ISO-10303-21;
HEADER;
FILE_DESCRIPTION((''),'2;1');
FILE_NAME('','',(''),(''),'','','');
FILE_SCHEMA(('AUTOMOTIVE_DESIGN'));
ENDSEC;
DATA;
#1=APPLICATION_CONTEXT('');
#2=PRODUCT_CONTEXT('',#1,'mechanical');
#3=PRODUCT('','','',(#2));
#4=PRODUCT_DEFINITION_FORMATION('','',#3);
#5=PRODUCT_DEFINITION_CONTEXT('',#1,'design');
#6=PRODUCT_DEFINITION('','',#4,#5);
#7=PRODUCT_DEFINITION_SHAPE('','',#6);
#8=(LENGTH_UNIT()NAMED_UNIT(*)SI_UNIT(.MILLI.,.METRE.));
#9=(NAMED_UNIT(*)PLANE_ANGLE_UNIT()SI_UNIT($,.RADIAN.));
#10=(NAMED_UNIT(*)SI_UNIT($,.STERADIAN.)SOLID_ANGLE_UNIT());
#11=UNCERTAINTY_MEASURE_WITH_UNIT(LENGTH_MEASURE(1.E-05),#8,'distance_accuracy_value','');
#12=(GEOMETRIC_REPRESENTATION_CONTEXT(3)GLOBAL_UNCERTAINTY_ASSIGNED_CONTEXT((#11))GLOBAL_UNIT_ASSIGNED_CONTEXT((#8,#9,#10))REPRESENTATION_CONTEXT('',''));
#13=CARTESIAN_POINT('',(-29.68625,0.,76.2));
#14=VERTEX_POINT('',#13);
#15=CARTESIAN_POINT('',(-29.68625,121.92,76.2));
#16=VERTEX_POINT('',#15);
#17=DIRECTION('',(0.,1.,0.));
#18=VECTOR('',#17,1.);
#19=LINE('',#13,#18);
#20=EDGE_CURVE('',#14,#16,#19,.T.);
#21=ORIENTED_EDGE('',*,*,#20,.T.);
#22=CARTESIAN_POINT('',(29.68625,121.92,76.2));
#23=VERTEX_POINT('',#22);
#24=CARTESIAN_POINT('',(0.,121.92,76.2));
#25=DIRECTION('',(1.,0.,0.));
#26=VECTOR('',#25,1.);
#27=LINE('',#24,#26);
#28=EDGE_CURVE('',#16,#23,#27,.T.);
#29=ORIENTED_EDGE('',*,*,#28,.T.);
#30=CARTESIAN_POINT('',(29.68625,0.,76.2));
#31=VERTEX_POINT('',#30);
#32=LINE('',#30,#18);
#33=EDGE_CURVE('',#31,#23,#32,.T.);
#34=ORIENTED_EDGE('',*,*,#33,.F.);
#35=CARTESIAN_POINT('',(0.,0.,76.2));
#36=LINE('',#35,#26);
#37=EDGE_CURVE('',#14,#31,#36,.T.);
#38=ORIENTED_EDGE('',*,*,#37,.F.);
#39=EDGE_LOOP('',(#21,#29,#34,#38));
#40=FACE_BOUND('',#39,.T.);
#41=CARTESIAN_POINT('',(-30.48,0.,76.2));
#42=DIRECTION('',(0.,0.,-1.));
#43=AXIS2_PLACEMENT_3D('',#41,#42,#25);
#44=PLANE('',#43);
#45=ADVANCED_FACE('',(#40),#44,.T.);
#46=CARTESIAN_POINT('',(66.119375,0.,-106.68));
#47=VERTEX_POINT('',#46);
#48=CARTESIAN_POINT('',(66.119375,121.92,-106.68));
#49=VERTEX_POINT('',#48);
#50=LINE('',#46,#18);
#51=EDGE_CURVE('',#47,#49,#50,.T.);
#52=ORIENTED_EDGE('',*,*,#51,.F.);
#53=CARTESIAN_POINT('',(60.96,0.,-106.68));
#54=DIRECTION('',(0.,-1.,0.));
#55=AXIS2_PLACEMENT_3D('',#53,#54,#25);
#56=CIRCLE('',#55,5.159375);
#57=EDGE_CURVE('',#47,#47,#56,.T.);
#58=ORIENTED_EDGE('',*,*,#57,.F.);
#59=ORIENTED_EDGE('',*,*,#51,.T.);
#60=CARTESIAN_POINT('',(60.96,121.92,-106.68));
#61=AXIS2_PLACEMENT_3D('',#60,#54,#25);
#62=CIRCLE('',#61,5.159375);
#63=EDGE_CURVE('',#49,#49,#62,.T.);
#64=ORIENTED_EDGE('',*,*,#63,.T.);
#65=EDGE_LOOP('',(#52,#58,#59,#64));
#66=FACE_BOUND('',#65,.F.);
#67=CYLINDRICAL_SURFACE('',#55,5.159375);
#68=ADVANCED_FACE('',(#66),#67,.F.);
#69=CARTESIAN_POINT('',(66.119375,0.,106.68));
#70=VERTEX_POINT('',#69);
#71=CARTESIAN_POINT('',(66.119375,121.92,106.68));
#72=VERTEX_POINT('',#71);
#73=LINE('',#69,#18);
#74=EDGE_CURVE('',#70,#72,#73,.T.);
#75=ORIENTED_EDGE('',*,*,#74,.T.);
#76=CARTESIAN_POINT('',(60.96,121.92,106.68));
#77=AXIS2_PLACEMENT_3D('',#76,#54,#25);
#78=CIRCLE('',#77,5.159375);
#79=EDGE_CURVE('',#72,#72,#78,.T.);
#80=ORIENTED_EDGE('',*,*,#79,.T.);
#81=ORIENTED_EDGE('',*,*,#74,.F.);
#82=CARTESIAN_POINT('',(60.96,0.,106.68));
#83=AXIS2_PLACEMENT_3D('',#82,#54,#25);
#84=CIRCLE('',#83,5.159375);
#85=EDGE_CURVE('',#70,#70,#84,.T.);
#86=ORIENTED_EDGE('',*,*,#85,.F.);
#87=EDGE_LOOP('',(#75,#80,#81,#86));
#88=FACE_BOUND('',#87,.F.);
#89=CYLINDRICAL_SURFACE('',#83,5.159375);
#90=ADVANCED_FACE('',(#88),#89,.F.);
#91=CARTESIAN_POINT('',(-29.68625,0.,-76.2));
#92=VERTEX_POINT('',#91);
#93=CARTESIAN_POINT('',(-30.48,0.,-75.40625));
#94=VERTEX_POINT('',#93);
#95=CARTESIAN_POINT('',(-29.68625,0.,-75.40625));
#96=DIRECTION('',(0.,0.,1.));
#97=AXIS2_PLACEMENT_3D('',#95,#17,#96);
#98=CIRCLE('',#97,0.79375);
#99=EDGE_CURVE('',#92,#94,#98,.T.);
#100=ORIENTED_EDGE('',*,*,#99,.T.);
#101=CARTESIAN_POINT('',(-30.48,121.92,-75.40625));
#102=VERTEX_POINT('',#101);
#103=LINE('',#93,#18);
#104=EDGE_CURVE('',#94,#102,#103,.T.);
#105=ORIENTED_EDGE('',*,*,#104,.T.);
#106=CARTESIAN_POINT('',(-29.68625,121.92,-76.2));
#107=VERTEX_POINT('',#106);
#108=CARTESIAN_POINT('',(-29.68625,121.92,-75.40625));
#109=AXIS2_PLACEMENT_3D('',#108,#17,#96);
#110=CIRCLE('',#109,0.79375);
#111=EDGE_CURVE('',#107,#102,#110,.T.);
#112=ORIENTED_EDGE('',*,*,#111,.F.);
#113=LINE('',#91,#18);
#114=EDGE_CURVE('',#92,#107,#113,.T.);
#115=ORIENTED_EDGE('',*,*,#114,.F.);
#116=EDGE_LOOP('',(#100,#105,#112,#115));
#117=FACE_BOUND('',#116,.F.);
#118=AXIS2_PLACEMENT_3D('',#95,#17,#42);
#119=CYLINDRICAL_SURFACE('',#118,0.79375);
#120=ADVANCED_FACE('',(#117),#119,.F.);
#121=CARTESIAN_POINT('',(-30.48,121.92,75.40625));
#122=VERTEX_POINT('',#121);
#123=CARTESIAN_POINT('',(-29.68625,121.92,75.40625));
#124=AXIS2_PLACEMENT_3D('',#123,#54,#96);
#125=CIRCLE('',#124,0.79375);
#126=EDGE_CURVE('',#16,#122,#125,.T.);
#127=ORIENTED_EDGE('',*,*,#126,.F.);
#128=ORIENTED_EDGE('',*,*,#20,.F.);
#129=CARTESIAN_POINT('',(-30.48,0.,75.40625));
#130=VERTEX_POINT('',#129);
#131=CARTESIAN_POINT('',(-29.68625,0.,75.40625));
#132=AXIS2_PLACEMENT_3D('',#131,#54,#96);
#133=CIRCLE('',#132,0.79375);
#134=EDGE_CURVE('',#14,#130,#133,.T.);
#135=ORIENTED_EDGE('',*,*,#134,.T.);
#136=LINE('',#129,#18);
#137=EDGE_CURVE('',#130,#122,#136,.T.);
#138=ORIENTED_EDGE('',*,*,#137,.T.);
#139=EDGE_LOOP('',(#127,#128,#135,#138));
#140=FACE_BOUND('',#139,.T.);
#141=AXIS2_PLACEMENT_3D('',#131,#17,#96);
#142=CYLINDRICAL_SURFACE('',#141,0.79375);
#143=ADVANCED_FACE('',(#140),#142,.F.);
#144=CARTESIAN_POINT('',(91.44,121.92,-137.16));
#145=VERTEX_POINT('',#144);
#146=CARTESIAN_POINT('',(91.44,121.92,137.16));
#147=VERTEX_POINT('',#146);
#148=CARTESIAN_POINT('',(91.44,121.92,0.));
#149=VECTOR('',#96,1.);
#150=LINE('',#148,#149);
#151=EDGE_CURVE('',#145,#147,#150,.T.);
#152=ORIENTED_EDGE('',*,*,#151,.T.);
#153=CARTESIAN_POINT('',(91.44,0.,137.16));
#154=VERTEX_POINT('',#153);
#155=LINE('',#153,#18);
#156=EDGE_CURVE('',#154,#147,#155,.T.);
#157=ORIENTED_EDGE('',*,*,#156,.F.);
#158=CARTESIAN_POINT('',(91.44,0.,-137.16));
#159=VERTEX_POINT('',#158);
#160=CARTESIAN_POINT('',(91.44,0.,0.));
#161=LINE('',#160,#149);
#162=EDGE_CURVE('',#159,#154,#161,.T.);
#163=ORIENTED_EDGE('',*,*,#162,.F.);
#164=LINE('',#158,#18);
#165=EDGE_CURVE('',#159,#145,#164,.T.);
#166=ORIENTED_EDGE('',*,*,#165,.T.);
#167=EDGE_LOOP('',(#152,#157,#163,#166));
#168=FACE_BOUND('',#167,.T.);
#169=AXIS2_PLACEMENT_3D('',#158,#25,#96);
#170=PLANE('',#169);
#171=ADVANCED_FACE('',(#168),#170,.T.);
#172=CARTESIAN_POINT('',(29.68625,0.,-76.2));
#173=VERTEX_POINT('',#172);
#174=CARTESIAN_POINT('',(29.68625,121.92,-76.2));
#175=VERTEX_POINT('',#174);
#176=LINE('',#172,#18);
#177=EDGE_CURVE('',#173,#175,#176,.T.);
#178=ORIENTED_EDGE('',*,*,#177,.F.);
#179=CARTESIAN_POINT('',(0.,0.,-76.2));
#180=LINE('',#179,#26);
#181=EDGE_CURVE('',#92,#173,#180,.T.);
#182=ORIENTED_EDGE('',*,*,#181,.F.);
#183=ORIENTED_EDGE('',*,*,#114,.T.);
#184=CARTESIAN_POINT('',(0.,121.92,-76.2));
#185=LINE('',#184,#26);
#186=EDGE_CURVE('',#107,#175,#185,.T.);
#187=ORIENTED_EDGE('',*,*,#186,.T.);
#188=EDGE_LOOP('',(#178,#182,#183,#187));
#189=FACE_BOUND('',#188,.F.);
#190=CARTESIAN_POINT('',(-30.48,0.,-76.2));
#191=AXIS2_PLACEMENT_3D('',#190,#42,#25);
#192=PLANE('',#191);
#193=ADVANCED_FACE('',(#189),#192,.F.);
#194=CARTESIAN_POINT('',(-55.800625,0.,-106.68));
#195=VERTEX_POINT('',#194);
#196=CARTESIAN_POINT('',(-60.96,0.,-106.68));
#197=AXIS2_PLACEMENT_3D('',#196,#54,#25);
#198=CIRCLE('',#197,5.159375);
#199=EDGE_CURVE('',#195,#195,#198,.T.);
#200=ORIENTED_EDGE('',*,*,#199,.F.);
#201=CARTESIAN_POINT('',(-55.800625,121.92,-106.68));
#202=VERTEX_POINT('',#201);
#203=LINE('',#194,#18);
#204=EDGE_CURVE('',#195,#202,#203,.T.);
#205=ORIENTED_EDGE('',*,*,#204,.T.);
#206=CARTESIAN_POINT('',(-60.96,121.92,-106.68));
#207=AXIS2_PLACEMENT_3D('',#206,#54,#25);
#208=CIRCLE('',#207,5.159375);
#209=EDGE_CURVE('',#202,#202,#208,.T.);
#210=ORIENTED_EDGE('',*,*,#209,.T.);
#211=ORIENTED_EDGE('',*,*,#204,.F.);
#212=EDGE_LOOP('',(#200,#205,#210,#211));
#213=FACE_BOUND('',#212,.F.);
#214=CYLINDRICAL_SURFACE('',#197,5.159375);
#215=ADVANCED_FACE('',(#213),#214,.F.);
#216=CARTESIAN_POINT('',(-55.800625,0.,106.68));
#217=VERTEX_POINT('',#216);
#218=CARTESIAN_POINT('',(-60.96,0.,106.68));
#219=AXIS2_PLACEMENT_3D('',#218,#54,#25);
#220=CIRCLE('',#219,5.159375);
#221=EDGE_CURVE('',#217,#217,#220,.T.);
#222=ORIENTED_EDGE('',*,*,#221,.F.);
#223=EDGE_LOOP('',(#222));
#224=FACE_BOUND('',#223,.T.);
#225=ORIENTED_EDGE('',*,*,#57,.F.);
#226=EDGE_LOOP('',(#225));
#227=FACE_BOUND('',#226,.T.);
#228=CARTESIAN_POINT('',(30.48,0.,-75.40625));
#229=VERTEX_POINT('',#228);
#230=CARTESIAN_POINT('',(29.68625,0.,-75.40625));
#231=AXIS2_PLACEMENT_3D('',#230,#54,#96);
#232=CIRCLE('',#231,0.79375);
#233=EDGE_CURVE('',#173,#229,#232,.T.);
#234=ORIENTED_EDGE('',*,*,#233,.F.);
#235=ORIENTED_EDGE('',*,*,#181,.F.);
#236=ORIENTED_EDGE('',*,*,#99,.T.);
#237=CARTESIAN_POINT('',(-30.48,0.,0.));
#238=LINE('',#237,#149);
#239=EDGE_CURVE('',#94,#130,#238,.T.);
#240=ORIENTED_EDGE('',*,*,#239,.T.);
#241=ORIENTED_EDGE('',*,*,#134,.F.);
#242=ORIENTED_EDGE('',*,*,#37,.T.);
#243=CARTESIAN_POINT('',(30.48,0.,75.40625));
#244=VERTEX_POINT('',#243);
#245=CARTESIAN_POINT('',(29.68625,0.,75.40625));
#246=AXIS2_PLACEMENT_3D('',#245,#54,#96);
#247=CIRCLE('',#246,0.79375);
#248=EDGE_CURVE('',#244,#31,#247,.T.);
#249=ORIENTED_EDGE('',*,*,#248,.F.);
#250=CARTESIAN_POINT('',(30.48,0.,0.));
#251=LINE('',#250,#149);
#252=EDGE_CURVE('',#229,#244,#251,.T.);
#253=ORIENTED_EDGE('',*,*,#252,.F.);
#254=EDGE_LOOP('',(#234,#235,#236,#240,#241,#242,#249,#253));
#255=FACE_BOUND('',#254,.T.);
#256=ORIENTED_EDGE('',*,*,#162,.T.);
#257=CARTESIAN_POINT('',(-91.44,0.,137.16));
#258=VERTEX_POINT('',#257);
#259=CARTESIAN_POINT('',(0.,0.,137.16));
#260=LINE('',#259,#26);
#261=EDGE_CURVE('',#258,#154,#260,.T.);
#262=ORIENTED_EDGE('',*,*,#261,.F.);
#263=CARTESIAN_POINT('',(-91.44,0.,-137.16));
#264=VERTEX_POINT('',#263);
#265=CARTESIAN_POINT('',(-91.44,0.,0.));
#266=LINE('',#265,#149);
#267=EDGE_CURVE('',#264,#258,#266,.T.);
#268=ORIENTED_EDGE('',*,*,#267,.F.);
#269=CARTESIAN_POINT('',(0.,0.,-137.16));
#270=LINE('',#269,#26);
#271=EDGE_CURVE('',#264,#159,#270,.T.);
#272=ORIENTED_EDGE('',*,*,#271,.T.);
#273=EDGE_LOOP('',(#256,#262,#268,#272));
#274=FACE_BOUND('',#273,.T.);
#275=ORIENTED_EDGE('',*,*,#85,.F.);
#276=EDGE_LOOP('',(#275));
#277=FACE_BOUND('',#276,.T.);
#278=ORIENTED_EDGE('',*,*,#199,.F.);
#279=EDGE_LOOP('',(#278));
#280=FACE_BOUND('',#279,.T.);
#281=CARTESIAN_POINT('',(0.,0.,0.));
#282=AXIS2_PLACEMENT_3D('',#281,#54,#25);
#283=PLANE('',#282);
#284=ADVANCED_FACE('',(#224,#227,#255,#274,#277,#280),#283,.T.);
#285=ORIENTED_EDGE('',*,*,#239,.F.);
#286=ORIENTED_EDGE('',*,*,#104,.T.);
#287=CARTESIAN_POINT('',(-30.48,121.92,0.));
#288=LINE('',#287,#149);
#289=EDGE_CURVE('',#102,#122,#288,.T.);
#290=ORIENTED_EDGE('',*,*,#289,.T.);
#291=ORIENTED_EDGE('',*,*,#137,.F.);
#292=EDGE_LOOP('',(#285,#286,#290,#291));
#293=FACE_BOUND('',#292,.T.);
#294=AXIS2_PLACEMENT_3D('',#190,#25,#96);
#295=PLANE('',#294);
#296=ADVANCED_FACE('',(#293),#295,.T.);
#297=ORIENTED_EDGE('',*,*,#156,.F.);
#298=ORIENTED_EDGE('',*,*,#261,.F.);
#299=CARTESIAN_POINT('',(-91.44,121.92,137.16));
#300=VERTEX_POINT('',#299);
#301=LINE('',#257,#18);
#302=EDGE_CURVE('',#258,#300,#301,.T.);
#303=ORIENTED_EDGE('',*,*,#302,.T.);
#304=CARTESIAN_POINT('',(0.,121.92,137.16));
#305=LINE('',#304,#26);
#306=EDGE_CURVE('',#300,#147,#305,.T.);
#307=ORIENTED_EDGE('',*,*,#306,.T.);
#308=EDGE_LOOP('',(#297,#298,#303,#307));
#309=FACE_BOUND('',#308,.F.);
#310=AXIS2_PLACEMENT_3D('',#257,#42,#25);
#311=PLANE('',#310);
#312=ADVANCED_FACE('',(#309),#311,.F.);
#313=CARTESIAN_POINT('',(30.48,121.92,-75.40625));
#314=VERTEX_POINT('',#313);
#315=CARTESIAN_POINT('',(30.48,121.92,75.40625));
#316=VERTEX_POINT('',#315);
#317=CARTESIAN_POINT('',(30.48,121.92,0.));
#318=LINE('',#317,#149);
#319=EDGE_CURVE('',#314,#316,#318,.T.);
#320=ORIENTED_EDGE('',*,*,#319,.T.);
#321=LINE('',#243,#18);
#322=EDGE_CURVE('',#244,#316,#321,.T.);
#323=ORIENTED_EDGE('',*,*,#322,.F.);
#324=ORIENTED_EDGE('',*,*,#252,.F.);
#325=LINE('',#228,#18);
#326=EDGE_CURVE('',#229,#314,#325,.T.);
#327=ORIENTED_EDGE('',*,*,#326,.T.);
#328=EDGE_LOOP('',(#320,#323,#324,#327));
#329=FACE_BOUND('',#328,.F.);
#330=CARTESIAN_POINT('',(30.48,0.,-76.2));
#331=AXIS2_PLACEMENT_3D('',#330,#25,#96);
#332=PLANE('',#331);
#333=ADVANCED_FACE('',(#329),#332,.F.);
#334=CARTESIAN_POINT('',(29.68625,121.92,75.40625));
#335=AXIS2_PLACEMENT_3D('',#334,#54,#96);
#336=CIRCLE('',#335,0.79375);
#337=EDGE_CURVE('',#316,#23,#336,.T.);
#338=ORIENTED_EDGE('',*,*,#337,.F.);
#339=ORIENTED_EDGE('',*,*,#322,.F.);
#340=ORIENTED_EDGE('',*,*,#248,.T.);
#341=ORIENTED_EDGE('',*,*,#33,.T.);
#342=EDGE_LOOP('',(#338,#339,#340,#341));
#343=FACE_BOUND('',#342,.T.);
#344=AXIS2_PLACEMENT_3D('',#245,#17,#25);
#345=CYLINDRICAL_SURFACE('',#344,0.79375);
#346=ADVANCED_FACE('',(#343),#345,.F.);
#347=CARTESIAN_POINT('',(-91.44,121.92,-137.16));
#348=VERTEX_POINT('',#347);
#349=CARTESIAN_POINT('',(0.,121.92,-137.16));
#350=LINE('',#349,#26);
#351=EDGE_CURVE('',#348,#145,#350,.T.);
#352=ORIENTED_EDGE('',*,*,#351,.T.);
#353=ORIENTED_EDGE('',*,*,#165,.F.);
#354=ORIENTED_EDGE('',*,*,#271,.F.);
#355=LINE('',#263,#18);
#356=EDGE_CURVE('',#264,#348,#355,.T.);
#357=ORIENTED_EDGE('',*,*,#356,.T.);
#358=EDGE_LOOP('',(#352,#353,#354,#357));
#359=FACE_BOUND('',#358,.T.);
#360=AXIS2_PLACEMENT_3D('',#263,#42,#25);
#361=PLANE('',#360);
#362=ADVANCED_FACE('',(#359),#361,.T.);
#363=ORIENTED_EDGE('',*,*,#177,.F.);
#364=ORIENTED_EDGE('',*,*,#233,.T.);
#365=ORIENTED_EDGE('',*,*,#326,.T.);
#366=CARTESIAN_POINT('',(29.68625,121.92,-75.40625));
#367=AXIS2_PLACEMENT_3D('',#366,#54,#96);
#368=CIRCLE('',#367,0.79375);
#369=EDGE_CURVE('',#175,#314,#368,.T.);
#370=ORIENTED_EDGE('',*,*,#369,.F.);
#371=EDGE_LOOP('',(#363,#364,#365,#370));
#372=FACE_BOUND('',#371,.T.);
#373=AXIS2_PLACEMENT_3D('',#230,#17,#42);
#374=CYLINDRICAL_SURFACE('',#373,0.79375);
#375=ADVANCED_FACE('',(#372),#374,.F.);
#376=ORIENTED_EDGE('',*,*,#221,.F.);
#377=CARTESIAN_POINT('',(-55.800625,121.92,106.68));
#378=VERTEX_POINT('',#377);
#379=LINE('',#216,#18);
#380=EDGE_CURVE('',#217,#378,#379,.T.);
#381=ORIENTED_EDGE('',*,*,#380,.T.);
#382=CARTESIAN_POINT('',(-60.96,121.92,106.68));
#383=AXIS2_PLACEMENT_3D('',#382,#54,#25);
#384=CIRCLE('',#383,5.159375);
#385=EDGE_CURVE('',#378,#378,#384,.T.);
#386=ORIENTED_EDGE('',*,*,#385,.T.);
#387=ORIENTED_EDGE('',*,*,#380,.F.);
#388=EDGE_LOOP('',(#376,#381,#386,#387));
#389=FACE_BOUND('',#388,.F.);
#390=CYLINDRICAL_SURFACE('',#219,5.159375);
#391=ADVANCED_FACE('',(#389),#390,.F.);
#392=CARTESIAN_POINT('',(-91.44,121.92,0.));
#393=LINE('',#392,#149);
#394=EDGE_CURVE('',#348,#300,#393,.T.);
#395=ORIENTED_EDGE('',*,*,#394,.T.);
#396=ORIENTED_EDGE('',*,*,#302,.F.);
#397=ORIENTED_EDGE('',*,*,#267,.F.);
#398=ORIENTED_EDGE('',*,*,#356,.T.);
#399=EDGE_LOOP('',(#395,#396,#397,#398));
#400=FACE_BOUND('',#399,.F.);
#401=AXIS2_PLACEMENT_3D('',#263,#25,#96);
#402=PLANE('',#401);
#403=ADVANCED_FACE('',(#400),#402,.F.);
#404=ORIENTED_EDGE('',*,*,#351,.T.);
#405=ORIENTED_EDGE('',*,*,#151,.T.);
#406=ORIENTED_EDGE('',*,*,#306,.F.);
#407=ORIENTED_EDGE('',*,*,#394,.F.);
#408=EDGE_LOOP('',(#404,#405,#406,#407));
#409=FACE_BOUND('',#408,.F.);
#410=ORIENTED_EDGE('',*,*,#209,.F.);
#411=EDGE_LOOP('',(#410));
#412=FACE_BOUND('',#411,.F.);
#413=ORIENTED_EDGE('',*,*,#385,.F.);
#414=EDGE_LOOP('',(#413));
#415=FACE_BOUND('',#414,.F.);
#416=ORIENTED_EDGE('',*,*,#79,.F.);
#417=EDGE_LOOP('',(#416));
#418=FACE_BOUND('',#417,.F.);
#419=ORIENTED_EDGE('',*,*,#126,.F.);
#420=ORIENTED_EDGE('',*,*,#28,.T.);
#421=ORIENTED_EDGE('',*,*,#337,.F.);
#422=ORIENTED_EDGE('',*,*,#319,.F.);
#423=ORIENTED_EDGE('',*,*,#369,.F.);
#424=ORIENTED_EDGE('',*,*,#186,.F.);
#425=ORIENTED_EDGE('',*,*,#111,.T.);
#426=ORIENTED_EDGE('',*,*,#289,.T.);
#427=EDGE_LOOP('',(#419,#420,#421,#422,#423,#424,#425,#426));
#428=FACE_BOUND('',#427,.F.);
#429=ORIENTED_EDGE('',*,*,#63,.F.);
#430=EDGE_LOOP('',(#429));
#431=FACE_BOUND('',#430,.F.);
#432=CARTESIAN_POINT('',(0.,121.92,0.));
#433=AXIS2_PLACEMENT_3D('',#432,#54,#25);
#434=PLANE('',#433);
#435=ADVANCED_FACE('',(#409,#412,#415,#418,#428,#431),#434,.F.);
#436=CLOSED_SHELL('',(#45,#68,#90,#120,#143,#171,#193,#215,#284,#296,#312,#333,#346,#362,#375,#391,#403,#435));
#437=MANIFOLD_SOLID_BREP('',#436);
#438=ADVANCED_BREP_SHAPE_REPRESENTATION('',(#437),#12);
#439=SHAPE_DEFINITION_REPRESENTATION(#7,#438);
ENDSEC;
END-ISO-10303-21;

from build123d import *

# Parameters (mm, degrees)
F1_W     = 182.88
F1_H     = 274.32
F2_DEPTH = 121.92
F3_R     = 5.159375
F4_DEPTH = 121.92
F5_W     = 60.96
F5_H     = 152.4
F6_DEPTH = 121.92
F7_R     = 0.79375


with BuildPart() as f2:
    # F1 (on Front) → F2 (new body)
    with BuildSketch(Plane.XZ):
        Rectangle(F1_W, F1_H)
    extrude(amount=-F2_DEPTH)

    # F3 (on face) → F4 (cut)
    with BuildSketch(Plane.XZ):
        with Locations((-60.96, 106.68)):
            Circle(F3_R)
        with Locations((60.96, 106.68)):
            Circle(F3_R)
        with Locations((-60.96, -106.68)):
            Circle(F3_R)
        with Locations((60.96, -106.68)):
            Circle(F3_R)
    extrude(amount=-F4_DEPTH, mode=Mode.SUBTRACT)

    # F5 (on face) → F6 (cut)
    with BuildSketch(Plane.XZ):
        Rectangle(F5_W, F5_H)
    extrude(amount=-F6_DEPTH, mode=Mode.SUBTRACT)

    # F7
    f7_edges = [f2.edges().sort_by_distance(p)[0] for p in [
        (-30.48, 60.96, 76.2),
        (30.48, 60.96, 76.2),
        (30.48, 60.96, -76.2),
        (-30.48, 60.96, -76.2),
    ]]
    fillet(f7_edges, radius=F7_R)


solid = f2.part
